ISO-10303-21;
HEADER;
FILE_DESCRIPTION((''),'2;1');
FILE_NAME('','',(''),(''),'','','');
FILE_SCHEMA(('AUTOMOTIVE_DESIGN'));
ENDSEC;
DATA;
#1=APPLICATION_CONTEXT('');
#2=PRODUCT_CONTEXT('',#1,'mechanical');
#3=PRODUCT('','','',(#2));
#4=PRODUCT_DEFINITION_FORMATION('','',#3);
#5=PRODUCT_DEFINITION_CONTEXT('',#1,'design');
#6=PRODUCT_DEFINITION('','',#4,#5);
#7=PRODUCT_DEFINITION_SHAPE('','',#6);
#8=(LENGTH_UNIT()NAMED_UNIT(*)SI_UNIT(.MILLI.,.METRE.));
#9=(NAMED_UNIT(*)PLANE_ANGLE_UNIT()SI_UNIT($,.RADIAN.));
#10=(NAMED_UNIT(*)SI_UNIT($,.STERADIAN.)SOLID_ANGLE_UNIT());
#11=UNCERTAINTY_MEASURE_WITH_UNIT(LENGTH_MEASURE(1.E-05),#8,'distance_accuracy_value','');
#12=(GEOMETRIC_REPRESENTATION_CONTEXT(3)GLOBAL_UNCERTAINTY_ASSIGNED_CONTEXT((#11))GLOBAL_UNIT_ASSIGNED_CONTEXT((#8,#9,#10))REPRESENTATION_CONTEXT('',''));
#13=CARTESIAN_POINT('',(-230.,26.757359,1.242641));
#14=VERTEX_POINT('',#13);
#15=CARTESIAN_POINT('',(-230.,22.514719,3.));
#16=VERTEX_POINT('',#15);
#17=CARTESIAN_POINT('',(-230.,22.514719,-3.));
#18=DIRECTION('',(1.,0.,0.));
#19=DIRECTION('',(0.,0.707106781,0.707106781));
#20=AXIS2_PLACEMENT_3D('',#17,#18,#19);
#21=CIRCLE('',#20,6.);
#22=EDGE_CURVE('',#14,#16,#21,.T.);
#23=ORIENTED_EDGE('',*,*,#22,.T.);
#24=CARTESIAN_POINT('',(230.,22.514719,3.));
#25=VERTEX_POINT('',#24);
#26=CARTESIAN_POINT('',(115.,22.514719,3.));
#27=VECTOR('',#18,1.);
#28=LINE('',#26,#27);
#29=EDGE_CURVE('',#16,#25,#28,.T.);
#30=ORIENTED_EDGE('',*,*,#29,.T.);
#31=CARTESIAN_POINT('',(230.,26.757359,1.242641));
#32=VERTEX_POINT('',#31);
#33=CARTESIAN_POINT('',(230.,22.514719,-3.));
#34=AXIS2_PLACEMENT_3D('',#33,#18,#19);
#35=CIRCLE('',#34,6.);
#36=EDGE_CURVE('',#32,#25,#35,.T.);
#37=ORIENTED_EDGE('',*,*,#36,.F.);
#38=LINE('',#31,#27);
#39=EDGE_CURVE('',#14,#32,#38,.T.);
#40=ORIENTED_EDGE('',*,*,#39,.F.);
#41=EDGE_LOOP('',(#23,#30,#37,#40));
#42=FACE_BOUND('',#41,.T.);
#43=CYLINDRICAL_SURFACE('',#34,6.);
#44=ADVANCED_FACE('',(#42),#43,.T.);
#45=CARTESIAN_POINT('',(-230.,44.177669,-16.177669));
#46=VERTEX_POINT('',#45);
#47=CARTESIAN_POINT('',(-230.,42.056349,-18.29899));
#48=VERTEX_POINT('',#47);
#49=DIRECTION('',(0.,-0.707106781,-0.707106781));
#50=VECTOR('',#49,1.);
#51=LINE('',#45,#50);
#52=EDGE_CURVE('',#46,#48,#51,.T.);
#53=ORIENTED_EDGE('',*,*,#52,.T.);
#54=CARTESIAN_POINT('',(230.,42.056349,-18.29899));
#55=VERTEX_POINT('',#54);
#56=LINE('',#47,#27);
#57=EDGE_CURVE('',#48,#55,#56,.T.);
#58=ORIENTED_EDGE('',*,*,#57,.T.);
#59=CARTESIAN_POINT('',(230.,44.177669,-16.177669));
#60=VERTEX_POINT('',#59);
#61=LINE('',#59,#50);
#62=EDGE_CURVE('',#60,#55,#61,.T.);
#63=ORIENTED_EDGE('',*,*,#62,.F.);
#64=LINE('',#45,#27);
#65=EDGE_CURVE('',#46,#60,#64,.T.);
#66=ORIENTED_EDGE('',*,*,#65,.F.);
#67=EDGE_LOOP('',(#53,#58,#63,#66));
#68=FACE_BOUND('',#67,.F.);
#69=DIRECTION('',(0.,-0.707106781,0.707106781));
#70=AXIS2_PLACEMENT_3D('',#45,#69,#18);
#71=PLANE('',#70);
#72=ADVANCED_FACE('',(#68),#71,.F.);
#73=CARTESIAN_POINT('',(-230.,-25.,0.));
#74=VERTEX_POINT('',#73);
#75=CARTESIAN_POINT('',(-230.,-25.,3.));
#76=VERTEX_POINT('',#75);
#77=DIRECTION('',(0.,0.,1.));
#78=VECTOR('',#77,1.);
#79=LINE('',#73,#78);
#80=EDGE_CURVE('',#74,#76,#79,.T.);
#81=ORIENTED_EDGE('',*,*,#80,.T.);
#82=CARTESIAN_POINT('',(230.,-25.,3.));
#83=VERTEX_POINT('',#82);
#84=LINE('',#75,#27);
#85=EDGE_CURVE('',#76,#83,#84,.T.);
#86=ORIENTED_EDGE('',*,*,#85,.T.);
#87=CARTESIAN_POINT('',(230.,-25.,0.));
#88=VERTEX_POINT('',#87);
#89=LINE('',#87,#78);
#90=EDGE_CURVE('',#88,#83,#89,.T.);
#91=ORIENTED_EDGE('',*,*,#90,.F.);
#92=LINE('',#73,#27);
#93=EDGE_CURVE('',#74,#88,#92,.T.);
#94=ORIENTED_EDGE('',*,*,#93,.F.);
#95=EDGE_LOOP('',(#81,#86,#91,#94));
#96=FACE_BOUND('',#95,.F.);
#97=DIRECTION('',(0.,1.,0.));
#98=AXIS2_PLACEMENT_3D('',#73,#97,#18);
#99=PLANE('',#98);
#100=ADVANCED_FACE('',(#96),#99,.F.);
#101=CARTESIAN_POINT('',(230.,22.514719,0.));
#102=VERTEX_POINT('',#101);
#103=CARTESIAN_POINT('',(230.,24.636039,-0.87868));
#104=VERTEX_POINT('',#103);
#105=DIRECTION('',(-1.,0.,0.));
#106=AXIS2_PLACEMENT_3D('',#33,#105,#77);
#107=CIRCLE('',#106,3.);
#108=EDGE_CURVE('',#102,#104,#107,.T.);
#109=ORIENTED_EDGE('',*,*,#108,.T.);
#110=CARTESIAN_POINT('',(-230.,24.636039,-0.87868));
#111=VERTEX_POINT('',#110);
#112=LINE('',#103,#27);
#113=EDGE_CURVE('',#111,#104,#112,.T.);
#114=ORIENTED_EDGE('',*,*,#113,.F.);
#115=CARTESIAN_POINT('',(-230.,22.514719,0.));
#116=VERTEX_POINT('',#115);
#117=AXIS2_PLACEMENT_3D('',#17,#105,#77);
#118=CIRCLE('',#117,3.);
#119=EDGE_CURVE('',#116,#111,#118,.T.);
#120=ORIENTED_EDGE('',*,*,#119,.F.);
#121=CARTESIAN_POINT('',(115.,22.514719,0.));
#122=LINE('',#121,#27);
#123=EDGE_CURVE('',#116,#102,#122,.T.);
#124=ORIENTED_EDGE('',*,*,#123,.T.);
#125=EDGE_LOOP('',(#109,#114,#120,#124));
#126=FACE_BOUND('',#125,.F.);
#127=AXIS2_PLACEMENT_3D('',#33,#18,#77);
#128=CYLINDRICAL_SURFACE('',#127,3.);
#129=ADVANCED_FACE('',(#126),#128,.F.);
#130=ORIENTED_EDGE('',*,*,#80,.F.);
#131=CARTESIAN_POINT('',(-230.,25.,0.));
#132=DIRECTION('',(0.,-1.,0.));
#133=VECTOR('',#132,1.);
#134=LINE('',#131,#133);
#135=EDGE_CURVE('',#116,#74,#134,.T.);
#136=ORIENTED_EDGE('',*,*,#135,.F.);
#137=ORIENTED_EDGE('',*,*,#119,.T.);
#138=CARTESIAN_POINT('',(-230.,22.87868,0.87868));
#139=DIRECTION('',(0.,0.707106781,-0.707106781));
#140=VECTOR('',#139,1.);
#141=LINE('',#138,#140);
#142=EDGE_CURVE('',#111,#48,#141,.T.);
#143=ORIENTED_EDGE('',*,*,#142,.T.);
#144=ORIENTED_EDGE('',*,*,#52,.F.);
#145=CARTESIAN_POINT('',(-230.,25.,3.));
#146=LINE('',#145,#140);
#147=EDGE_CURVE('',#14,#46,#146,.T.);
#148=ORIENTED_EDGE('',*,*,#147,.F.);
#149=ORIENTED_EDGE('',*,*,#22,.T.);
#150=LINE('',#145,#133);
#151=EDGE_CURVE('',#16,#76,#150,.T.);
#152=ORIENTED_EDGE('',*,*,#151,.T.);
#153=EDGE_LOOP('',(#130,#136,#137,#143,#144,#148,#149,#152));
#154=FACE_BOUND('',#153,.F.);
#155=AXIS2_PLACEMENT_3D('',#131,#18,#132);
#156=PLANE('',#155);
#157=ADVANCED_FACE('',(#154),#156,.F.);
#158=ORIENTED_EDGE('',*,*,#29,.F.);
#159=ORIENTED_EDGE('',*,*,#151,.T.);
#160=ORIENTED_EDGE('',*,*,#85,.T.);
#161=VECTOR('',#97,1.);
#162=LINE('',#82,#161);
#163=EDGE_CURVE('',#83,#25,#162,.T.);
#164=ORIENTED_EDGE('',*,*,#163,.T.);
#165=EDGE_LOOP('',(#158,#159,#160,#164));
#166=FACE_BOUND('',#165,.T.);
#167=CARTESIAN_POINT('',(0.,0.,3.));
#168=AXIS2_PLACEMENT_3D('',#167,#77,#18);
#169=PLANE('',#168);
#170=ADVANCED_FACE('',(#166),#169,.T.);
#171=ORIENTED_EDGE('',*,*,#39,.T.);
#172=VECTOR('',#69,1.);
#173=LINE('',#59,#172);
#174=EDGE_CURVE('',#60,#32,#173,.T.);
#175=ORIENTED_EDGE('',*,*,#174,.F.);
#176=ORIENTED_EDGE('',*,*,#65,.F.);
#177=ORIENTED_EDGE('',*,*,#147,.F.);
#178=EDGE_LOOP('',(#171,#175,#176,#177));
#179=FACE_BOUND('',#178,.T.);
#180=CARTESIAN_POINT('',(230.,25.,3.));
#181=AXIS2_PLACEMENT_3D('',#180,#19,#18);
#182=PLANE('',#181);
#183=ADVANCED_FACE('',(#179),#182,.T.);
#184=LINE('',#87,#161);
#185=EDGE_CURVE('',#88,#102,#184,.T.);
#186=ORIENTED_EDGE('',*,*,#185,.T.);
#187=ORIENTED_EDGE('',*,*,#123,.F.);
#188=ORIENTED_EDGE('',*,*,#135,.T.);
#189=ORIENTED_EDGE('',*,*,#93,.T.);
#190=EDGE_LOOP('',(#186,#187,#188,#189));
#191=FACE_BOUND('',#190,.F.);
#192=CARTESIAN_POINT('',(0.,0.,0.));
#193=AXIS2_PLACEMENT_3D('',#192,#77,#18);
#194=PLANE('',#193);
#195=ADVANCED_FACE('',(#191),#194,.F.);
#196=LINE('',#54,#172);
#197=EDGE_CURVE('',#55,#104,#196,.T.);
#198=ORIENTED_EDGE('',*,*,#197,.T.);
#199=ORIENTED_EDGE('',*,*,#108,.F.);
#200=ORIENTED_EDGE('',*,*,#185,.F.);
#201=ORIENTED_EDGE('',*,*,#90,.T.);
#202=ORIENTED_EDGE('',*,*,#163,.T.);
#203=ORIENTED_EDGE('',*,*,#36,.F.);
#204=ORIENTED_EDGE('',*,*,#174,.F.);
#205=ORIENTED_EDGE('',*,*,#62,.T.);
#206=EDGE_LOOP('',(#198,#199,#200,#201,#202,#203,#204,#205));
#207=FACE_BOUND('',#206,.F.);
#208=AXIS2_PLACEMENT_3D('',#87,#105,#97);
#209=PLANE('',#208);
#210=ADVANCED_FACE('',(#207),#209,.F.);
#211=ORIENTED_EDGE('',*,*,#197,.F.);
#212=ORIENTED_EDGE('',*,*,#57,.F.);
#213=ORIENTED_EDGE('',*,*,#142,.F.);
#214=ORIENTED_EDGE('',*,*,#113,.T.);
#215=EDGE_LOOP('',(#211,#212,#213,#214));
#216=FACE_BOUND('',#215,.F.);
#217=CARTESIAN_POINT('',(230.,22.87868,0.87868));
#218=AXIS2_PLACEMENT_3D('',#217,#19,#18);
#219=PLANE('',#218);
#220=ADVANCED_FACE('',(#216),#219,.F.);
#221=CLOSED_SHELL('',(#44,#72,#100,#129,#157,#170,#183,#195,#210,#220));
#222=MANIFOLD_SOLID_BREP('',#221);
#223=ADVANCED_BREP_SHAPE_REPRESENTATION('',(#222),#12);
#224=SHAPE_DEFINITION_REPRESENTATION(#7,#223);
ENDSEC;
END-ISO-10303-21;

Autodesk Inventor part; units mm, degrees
ref_plane "YZ Plane" through (0, 0, 0) normal (1, 0, 0) x (0, 1, 0)
ref_plane "XZ Plane" through (0, 0, 0) normal (0, 1, 0) x (-1, 0, 0)
sketch "Sketch3" plane through (230, 25, 3) normal (0, 0.7071068, 0.7071068) x (1, 0, 0)
  line L0 (0, 0) -> (-460, 0)
  line L1 (-460, 0) -> (-460, 27.12132)
  line L2 (-460, 27.12132) -> (0, 27.12132)
  line L3 (0, 27.12132) -> (0, 0)
  line L4 (0, 2.12132) -> (-460, 2.12132)
  line L5 (-460, -35.355339) -> (-460, 0)
  point P0 (-230, -15.556349)
  dimension "d4" = 25
  dimension "d5" = 0
sketch "Sketch1 outline for Plate1" plane through (0, 0, 0) normal (0, 0, 1) x (1, 0, 0)
  line L0 (-230, 25) -> (-230, -25)
  line L1 (230, 25) -> (-230, 25)
  line L2 (230, -25) -> (230, 25)
  line L3 (-230, -25) -> (230, -25)
extrude "Plate1" add sketch "Sketch1 outline for Plate1" along normal blind 3
sketch "Sketch1" plane through (0, 0, 0) normal (0, 0, 1) x (1, 0, 0)
  line L0 (-230, -25) -> (230, -25)
  line L1 (230, -25) -> (230, 25)
  line L2 (230, 25) -> (-230, 25)
  line L3 (-230, 25) -> (-230, -25)
  line L4 (-230, -25) -> (230, 25) construction
  line L5 (230, -25) -> (-230, 25) construction
  point P0 (0, 0)
  dimension "d0" = 460
  dimension "d1" = 50
ref_plane "Work Plane1" through (230, 25, 3) normal (0, 0.7071068, 0.7071068) x (1, 0, 0)
sketch "Sketch3 outline for Plate2" plane through (230, 25, 3) normal (0, 0.7071068, 0.7071068) x (1, 0, 0)
  line L0 (0, 0) -> (-460, 0)
  line L1 (-460, 0) -> (-460, 27.12132)
  line L2 (-460, 27.12132) -> (0, 27.12132)
  line L3 (0, 27.12132) -> (0, 2.12132)
  line L4 (0, 2.12132) -> (0, 0)
sheet face with bend "Face2" sketch "Sketch3 outline for Plate2" thickness 3 toward (0, -0.7071068, -0.7071068) bend radius 3
bend "Bend1"
equation "\"d2\" = Thickness"
equation "\"d6\" = BendRadius"
equation "\"d7\" = BendReliefWidth"
equation "\"d9\" = MinimumRemnant"
equation "\"d8\" = BendReliefDepth"
equation "\"d10\" = TransitionRadius"
equation "\"BendRadius\" = Thickness"
equation "\"BendReliefWidth\" = Thickness"
equation "\"BendReliefDepth\" = 0.5 * Thickness"
equation "\"CornerReliefSize\" = 4 * Thickness"
equation "\"MinimumRemnant\" = 2 * Thickness"
equation "\"TransitionRadius\" = BendRadius"
equation "\"JacobiRadiusSize\" = BendRadius"
equation "\"GapSize\" = Thickness"
equation "\"Thickness\" = 3"
properties part number "Skena"
